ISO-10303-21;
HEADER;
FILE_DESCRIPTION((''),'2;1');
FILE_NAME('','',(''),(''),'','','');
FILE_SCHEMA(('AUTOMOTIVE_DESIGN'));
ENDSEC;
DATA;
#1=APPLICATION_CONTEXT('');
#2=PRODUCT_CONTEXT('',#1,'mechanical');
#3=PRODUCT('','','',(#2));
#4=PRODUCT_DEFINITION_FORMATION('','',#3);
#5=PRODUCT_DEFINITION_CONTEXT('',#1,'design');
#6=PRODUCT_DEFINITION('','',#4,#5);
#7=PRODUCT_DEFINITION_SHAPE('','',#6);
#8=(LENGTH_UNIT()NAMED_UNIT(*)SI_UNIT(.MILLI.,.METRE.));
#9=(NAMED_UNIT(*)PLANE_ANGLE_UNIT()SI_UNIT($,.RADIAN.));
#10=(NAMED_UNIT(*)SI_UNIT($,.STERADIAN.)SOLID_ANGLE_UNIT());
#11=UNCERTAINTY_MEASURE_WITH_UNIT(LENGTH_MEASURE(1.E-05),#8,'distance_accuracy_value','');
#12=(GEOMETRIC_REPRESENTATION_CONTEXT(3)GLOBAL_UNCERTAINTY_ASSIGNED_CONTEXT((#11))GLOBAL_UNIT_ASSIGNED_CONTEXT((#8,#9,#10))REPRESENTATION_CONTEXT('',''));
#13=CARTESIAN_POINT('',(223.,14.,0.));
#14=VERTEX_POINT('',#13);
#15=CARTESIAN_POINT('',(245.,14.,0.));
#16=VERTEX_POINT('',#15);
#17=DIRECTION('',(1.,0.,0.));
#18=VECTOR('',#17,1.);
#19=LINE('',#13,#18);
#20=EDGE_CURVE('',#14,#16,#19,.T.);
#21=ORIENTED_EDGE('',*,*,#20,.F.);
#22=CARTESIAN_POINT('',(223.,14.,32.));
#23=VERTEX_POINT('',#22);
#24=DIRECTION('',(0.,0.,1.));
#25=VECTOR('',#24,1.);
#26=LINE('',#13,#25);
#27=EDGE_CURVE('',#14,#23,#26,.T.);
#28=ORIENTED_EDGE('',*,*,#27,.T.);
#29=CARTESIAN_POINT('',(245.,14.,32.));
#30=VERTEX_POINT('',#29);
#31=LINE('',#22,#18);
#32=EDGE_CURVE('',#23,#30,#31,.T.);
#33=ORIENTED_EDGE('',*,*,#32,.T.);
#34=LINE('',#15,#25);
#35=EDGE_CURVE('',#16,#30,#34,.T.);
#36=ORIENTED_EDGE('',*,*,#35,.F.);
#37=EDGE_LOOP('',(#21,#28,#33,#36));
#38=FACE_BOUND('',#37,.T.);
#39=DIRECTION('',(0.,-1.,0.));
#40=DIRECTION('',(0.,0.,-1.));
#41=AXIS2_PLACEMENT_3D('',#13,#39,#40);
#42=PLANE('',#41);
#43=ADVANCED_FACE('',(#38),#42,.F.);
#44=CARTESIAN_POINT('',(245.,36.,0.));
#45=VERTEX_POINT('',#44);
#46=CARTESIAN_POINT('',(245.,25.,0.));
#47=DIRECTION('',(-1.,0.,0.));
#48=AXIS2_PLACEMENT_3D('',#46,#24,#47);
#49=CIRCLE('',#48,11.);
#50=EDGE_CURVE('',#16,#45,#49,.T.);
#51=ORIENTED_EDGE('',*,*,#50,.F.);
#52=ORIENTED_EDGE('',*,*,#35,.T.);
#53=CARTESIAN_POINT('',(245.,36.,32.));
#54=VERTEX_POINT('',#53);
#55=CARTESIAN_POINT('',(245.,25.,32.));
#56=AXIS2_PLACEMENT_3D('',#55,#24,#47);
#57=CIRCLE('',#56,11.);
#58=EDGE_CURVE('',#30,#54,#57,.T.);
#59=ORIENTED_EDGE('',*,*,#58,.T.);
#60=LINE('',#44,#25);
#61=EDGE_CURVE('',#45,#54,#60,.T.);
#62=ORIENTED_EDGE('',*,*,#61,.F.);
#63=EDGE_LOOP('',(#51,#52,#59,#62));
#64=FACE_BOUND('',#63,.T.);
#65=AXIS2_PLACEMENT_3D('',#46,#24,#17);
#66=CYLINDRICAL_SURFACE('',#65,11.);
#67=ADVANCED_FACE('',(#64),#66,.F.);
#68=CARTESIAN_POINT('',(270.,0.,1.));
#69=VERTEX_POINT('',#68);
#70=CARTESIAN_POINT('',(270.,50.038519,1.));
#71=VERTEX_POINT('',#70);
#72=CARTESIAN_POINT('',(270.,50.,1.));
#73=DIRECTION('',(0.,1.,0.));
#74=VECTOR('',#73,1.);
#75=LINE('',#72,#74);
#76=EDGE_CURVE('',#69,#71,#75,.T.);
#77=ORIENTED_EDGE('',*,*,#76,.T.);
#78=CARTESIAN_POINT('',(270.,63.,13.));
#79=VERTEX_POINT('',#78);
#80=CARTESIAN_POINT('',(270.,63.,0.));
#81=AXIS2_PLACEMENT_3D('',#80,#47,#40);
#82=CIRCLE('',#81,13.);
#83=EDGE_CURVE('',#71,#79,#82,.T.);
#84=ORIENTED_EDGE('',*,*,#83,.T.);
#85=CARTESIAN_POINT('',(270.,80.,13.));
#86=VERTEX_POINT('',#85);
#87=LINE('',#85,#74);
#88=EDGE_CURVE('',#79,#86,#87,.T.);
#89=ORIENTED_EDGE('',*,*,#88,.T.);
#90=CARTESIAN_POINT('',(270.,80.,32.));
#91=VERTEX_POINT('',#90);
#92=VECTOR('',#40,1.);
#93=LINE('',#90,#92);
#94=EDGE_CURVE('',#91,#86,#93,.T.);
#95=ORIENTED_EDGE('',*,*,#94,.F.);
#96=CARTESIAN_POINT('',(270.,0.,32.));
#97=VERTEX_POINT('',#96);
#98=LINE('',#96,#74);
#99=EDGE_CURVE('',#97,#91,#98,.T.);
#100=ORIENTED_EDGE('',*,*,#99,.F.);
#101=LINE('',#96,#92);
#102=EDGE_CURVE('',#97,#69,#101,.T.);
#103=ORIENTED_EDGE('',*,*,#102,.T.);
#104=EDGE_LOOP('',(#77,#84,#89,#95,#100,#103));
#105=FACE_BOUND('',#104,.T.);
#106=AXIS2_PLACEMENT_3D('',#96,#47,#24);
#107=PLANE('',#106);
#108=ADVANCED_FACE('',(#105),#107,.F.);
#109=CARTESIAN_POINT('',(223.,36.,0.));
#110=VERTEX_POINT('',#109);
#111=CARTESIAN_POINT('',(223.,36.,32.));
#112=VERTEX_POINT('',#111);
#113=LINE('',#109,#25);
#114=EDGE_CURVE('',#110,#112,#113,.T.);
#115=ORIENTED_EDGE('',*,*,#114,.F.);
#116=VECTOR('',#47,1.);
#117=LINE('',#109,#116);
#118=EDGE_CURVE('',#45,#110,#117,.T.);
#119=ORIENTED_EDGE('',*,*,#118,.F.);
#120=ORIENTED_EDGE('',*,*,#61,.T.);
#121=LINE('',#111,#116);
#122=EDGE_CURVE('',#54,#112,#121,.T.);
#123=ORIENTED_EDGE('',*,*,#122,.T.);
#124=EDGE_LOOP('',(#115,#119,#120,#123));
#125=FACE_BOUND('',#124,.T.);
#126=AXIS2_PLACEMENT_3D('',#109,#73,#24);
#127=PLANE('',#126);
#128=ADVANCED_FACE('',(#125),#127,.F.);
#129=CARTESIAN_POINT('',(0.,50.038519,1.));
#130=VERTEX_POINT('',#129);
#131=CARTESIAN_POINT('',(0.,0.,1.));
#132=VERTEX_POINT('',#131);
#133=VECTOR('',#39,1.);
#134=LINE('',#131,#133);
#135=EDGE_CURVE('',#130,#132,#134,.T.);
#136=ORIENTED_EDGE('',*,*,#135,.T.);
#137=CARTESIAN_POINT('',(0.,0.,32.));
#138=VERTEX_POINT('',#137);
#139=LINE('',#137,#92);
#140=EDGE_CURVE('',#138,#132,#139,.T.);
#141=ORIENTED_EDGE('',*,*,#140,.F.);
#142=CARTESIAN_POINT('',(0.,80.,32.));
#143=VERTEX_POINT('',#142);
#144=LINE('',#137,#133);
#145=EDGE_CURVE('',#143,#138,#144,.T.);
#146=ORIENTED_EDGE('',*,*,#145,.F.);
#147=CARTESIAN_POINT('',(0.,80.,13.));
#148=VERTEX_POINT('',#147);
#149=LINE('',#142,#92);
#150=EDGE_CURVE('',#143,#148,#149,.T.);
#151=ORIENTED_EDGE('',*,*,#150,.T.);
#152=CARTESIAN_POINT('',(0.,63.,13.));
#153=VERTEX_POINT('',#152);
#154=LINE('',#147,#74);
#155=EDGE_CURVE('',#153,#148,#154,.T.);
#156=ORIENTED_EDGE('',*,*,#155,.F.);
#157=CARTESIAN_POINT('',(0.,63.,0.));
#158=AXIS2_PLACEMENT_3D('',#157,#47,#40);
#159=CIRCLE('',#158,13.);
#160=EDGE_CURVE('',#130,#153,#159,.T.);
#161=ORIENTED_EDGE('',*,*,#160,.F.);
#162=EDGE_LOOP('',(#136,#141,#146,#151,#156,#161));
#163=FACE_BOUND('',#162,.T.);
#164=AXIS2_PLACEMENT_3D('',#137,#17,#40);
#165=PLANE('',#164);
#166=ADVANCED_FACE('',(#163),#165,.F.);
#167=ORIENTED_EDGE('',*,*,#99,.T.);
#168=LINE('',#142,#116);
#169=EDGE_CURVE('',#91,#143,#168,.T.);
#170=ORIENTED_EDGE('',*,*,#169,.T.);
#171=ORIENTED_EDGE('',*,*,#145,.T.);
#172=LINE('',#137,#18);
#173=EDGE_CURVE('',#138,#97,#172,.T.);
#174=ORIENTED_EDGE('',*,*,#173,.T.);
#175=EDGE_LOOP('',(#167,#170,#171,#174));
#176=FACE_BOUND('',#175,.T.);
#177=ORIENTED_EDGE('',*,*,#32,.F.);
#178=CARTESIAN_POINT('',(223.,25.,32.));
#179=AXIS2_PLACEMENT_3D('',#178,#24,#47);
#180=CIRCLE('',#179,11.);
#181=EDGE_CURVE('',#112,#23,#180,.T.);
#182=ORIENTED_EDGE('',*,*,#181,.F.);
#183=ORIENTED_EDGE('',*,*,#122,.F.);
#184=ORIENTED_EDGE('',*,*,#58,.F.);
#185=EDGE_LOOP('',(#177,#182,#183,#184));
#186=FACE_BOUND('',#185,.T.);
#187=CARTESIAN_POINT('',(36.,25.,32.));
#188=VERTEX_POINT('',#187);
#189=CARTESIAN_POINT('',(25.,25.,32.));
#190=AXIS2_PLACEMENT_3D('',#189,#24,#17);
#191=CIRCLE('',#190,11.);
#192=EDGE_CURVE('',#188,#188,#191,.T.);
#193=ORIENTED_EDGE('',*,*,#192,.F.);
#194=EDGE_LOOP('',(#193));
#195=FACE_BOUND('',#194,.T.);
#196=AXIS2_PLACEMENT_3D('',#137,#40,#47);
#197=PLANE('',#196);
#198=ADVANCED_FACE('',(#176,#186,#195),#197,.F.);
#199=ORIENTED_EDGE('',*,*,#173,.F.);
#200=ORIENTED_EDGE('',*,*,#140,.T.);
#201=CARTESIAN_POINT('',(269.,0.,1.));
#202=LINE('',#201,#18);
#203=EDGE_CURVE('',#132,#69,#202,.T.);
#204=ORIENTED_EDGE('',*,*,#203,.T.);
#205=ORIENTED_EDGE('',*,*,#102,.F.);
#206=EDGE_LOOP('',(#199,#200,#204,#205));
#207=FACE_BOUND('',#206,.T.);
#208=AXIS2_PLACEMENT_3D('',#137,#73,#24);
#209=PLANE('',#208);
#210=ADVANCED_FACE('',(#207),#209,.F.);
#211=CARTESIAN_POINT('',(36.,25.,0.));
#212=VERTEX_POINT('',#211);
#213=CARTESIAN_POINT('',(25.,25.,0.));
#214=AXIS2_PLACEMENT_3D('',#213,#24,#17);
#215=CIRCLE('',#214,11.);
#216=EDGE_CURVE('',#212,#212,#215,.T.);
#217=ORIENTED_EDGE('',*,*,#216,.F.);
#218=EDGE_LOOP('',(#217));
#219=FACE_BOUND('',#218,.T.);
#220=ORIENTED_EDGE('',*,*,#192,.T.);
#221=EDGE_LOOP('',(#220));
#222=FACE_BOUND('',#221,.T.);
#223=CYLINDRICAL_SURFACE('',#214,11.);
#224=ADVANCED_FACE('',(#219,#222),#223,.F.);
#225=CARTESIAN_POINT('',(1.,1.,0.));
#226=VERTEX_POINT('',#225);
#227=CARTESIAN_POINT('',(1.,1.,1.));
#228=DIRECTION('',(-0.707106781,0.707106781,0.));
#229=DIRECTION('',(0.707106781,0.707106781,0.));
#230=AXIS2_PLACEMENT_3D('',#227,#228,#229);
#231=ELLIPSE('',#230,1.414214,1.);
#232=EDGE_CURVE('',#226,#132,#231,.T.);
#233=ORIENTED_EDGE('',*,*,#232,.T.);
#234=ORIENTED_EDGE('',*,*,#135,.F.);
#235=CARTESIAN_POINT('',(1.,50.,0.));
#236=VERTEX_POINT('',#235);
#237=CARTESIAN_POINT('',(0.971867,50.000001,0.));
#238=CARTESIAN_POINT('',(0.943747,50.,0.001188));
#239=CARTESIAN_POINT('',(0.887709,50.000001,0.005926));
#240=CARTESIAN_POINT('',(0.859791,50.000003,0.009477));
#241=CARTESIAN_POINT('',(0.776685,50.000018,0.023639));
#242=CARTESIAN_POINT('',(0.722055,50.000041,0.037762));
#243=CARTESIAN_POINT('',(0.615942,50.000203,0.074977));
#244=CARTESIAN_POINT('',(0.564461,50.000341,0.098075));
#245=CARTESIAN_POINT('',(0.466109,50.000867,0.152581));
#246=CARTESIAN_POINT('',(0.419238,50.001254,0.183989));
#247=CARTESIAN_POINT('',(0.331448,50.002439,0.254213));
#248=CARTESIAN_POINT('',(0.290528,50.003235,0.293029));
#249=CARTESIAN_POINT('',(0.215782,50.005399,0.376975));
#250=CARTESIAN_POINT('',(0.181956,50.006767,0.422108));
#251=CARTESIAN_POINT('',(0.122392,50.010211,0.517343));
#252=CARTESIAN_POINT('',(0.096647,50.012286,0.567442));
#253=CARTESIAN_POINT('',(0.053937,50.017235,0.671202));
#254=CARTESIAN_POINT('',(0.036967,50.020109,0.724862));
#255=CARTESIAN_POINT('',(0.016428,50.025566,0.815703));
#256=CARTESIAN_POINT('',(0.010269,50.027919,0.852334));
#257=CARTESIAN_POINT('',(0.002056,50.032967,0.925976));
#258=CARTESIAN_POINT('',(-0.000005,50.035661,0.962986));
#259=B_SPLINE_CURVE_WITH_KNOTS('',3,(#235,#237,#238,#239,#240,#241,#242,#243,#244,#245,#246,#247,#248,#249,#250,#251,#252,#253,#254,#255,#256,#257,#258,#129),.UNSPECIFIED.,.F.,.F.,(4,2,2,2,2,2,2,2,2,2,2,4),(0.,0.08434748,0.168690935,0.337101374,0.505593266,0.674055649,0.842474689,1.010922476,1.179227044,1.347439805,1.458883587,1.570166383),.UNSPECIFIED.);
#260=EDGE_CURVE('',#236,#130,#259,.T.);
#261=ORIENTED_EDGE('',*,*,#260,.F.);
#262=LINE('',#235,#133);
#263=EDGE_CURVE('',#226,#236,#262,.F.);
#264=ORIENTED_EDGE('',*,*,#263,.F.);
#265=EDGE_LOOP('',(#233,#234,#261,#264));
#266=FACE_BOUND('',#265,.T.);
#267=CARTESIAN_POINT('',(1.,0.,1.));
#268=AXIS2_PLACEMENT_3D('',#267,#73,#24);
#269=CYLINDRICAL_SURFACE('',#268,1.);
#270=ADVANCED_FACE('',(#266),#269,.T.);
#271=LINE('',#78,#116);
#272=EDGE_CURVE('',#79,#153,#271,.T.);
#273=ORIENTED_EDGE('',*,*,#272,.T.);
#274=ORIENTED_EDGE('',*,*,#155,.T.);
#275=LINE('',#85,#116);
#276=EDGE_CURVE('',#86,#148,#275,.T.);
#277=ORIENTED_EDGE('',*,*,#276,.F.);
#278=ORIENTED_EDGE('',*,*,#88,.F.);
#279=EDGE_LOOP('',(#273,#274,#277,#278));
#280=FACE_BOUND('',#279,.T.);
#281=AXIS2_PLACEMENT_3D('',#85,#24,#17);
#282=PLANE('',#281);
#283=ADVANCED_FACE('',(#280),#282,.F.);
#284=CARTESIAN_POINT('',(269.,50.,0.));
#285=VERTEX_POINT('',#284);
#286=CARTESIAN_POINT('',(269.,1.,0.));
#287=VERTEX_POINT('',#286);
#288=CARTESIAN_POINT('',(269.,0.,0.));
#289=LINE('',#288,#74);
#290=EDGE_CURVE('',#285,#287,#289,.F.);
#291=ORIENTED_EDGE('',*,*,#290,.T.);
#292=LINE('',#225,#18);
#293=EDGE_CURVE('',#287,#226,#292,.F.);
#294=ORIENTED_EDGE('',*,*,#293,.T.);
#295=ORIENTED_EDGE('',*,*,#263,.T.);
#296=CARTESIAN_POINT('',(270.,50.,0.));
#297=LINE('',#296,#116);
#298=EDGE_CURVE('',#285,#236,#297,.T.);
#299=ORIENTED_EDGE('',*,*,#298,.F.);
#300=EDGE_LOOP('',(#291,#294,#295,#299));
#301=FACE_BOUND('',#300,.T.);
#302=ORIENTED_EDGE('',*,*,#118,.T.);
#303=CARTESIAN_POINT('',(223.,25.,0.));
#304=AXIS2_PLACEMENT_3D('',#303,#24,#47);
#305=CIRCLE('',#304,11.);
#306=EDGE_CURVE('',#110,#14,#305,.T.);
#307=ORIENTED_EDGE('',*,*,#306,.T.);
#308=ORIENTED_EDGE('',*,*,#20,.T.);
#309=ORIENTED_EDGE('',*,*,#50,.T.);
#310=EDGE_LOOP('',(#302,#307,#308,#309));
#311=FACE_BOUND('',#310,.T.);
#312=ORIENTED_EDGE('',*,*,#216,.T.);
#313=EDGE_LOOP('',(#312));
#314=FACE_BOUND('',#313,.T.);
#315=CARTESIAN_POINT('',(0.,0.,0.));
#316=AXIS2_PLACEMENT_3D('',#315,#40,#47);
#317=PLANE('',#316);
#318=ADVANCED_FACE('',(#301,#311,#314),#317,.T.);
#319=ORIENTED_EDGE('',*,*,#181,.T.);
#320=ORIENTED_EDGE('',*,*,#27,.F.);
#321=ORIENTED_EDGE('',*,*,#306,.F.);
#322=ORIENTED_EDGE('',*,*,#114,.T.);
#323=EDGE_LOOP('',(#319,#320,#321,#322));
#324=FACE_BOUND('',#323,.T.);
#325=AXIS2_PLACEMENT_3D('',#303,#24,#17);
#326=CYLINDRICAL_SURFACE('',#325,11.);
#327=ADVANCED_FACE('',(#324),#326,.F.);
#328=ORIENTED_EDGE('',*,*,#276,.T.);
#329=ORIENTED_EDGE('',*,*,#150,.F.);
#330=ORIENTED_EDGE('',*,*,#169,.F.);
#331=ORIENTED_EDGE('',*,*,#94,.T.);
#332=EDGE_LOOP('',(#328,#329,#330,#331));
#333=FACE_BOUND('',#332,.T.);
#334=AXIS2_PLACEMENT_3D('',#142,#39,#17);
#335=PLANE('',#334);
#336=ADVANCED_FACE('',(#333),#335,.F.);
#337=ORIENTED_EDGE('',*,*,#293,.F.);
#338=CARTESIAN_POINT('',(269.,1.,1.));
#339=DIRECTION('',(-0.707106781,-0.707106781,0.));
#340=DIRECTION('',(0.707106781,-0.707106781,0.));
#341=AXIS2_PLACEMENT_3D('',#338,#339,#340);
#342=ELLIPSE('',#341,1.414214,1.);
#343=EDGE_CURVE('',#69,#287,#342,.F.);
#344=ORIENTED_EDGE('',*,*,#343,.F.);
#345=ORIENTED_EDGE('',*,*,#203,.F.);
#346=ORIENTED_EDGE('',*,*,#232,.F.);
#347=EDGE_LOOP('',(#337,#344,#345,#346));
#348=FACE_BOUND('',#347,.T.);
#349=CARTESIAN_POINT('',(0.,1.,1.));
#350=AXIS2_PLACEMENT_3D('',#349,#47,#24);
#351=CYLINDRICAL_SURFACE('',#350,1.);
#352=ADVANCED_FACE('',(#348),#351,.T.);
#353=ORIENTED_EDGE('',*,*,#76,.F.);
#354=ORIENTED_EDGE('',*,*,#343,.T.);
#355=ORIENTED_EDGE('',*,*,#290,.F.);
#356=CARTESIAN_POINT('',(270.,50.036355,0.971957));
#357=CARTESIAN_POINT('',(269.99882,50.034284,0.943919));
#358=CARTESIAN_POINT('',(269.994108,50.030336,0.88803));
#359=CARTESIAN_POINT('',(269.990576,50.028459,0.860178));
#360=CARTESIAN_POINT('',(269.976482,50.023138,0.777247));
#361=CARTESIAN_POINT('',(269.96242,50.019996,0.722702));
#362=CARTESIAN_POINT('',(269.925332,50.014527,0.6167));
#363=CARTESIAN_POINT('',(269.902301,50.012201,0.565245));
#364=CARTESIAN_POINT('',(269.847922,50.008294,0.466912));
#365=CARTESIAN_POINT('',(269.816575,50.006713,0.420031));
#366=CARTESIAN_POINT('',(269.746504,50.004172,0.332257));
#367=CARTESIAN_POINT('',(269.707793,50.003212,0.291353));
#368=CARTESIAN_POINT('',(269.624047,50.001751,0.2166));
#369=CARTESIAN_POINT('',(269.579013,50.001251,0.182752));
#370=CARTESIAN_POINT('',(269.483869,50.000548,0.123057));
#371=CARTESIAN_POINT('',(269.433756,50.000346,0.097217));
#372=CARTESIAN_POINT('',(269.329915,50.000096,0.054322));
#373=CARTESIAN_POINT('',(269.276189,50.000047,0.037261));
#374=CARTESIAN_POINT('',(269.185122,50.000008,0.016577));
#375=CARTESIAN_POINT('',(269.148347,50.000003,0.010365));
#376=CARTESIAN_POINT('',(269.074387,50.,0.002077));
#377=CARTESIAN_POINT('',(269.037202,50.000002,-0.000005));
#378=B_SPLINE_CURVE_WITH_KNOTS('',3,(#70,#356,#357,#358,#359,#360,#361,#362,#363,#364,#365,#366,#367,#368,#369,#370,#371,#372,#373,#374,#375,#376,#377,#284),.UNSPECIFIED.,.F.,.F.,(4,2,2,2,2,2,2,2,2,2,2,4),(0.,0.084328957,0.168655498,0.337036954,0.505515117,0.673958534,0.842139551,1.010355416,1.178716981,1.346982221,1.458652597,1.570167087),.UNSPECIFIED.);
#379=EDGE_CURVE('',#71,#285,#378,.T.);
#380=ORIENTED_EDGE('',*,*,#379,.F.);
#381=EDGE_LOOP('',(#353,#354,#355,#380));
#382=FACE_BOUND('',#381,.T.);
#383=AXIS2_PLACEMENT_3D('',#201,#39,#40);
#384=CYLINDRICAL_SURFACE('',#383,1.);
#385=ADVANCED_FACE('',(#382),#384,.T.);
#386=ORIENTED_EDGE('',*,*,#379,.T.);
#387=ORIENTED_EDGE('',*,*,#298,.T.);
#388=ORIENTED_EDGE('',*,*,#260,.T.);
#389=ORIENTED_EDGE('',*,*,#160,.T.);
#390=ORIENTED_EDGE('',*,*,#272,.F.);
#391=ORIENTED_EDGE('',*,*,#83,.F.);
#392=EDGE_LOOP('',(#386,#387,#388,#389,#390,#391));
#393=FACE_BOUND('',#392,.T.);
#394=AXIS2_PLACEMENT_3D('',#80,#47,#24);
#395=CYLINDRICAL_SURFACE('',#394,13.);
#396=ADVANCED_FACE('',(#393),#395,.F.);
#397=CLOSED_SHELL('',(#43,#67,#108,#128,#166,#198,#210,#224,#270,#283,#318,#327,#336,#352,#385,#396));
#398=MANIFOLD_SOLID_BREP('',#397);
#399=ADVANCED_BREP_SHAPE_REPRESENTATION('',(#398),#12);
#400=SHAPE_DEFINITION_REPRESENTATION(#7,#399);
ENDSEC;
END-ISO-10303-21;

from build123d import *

# Parameters (mm, degrees)
SKETCH_1_W          = 270
SKETCH_1_H          = 80
EXTRUDE_1_DEPTH     = 32
SKETCH_2_R          = 11
CUT_EXTRUDE_1_DEPTH = 284.414890223
CUT_EXTRUDE_2_DEPTH = 284.414890223
FILLET_1_R          = 1
FILLET_2_R          = 1
FILLET_4_R          = 1


with BuildPart() as part:
    # 草图1 → 拉伸1 (new body)
    with BuildSketch(Plane.XY):
        with Locations((135, 40)):
            Rectangle(SKETCH_1_W, SKETCH_1_H)
    extrude(amount=EXTRUDE_1_DEPTH)

    # 草图2 → 切除-拉伸1 (cut, through all)
    with BuildSketch(Plane.XY.offset(32)):
        with Locations((25, 25)):
            Circle(SKETCH_2_R)
        with BuildLine():
            Line((223, 36), (245, 36))
            ThreePointArc((245, 36), (256, 25), (245, 14))
            Line((245, 14), (223, 14))
            ThreePointArc((223, 14), (212, 25), (223, 36))
        make_face()
    extrude(amount=-CUT_EXTRUDE_1_DEPTH, mode=Mode.SUBTRACT)

    # 草图3 → 切除-拉伸2 (cut, through all)
    with BuildSketch(Plane.ZY):
        with BuildLine():
            Line((13, 80), (13, 63))
            ThreePointArc((13, 63), (9.192388155, 53.807611845), (0, 50))
            Line((0, 50), (0, 80))
            Line((0, 80), (13, 80))
        make_face()
    extrude(amount=-CUT_EXTRUDE_2_DEPTH, mode=Mode.SUBTRACT)

    # 圆角1
    fillet_1_edges = [part.edges().sort_by_distance(p)[0] for p in [
        (270, 25, 0),
    ]]
    fillet(fillet_1_edges, radius=FILLET_1_R)

    # 圆角2
    fillet_2_edges = [part.edges().sort_by_distance(p)[0] for p in [
        (0, 25, 0),
    ]]
    fillet(fillet_2_edges, radius=FILLET_2_R)

    # 圆角4
    # the kernel refuses this fillet: 1 mm, written as the material it takes off along each edge
    with BuildSketch(Plane(origin=(-1.5, 0, 0), x_dir=(0, 0, 1), z_dir=(1, 0, 0))) as fillet_4_piece_1:
        with BuildLine():
            CenterArc((FILLET_4_R, -FILLET_4_R), FILLET_4_R, 90, 90)
            Line((0, -FILLET_4_R), (0, 0))
            Line((0, 0), (FILLET_4_R, 0))
        make_face()
    extrude(amount=273, mode=Mode.SUBTRACT)


solid = part.part
